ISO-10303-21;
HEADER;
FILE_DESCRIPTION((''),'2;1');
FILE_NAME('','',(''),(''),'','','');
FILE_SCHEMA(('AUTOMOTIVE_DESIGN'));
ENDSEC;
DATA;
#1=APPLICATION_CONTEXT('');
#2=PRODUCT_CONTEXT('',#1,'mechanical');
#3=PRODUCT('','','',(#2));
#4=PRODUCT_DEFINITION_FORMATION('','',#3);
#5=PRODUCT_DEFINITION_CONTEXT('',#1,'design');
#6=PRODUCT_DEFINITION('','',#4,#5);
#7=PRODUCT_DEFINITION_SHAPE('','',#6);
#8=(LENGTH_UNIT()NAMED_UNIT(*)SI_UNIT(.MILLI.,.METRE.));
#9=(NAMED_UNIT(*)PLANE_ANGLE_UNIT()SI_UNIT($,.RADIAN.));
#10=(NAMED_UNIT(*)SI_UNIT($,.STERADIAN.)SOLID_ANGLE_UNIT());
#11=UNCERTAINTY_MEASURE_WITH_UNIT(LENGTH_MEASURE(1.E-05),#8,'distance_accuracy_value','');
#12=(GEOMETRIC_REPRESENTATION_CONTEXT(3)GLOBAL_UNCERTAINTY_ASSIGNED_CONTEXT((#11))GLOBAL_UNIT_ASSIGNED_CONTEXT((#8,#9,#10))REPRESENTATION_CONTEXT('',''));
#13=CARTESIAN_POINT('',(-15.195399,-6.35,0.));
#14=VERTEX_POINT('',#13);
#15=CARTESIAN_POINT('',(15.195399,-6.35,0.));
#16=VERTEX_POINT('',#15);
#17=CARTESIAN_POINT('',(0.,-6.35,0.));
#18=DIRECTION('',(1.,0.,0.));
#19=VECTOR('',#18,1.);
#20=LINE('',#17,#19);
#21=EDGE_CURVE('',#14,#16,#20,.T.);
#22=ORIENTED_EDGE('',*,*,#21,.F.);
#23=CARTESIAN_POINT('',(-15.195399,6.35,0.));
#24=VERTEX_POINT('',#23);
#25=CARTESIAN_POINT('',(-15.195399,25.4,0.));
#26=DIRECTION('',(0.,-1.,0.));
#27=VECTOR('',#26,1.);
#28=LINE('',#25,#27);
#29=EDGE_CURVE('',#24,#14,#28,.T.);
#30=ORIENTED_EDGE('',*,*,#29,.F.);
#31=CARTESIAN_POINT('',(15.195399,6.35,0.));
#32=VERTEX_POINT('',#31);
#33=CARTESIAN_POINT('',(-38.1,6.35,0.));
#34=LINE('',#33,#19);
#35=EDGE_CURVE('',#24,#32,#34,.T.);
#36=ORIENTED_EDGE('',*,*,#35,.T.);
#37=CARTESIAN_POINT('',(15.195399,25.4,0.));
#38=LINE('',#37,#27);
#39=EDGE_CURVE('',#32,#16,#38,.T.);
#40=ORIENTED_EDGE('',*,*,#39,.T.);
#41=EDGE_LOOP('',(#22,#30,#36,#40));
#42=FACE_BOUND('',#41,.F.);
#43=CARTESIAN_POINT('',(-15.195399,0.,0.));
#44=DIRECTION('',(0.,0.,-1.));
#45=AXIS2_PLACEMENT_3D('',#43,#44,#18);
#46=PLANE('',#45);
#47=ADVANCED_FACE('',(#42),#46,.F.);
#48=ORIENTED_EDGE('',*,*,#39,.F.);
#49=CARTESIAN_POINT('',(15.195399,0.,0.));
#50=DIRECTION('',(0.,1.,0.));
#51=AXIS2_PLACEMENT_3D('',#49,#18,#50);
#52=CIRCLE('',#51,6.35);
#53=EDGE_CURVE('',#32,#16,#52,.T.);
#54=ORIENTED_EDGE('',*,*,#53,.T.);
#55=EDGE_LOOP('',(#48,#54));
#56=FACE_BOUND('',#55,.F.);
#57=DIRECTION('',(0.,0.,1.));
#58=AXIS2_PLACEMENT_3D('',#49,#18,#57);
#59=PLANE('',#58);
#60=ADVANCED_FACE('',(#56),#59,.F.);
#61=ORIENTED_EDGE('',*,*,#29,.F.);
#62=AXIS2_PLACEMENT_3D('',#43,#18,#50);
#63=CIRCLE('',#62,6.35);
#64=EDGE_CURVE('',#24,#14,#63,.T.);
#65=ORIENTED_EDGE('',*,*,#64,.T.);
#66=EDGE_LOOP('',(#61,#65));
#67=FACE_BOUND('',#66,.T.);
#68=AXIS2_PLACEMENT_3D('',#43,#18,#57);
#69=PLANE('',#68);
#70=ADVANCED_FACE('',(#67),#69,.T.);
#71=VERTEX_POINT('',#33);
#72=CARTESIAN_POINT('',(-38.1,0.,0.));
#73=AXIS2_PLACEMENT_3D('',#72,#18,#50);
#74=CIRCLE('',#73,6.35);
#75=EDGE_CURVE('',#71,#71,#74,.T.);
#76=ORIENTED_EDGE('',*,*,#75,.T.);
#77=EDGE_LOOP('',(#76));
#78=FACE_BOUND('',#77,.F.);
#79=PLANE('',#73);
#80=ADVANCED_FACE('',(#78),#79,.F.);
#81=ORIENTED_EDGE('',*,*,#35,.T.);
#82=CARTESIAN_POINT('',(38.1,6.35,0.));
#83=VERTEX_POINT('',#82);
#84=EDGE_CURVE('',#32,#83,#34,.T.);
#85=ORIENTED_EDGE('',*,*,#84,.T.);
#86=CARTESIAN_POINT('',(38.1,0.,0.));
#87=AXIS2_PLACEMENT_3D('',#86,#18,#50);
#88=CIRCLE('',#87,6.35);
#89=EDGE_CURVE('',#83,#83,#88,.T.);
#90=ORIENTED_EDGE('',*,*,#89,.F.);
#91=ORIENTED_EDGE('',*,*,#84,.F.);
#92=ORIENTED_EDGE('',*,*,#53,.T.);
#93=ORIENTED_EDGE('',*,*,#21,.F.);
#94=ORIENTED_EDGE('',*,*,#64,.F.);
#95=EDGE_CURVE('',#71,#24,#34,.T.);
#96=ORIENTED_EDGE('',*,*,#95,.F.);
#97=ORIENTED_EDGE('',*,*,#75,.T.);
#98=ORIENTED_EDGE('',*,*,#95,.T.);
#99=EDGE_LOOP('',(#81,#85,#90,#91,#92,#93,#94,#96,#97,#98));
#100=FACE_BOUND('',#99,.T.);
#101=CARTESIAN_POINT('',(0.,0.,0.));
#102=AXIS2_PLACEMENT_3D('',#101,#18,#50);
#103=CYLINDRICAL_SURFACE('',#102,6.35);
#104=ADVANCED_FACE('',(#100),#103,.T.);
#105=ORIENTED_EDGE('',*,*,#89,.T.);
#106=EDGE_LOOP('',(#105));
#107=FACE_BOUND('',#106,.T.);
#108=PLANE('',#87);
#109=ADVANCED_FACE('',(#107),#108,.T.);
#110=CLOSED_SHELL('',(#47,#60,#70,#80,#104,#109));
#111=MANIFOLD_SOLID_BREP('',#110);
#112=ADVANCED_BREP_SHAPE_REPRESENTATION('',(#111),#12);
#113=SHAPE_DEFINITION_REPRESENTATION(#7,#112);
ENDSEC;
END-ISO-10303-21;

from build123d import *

# Parameters (mm, degrees)
F0_R     = 6.35
F1_DEPTH = 38.1
F2_W     = 30.3907971829
F2_H     = 7.0625422522
F3_DEPTH = 25.4


with BuildPart() as f1:
    # F0 (on Right) → F1 (new body, symmetric)
    with BuildSketch(Plane.YZ):
        Circle(F0_R)
    extrude(amount=F1_DEPTH, both=True)

    # F2 (on Front) → F3 (cut, symmetric)
    with BuildSketch(Plane.XZ):
        with Locations((0, 3.5312711261)):
            Rectangle(F2_W, F2_H)
    extrude(amount=F3_DEPTH, both=True, mode=Mode.SUBTRACT)


solid = f1.part
